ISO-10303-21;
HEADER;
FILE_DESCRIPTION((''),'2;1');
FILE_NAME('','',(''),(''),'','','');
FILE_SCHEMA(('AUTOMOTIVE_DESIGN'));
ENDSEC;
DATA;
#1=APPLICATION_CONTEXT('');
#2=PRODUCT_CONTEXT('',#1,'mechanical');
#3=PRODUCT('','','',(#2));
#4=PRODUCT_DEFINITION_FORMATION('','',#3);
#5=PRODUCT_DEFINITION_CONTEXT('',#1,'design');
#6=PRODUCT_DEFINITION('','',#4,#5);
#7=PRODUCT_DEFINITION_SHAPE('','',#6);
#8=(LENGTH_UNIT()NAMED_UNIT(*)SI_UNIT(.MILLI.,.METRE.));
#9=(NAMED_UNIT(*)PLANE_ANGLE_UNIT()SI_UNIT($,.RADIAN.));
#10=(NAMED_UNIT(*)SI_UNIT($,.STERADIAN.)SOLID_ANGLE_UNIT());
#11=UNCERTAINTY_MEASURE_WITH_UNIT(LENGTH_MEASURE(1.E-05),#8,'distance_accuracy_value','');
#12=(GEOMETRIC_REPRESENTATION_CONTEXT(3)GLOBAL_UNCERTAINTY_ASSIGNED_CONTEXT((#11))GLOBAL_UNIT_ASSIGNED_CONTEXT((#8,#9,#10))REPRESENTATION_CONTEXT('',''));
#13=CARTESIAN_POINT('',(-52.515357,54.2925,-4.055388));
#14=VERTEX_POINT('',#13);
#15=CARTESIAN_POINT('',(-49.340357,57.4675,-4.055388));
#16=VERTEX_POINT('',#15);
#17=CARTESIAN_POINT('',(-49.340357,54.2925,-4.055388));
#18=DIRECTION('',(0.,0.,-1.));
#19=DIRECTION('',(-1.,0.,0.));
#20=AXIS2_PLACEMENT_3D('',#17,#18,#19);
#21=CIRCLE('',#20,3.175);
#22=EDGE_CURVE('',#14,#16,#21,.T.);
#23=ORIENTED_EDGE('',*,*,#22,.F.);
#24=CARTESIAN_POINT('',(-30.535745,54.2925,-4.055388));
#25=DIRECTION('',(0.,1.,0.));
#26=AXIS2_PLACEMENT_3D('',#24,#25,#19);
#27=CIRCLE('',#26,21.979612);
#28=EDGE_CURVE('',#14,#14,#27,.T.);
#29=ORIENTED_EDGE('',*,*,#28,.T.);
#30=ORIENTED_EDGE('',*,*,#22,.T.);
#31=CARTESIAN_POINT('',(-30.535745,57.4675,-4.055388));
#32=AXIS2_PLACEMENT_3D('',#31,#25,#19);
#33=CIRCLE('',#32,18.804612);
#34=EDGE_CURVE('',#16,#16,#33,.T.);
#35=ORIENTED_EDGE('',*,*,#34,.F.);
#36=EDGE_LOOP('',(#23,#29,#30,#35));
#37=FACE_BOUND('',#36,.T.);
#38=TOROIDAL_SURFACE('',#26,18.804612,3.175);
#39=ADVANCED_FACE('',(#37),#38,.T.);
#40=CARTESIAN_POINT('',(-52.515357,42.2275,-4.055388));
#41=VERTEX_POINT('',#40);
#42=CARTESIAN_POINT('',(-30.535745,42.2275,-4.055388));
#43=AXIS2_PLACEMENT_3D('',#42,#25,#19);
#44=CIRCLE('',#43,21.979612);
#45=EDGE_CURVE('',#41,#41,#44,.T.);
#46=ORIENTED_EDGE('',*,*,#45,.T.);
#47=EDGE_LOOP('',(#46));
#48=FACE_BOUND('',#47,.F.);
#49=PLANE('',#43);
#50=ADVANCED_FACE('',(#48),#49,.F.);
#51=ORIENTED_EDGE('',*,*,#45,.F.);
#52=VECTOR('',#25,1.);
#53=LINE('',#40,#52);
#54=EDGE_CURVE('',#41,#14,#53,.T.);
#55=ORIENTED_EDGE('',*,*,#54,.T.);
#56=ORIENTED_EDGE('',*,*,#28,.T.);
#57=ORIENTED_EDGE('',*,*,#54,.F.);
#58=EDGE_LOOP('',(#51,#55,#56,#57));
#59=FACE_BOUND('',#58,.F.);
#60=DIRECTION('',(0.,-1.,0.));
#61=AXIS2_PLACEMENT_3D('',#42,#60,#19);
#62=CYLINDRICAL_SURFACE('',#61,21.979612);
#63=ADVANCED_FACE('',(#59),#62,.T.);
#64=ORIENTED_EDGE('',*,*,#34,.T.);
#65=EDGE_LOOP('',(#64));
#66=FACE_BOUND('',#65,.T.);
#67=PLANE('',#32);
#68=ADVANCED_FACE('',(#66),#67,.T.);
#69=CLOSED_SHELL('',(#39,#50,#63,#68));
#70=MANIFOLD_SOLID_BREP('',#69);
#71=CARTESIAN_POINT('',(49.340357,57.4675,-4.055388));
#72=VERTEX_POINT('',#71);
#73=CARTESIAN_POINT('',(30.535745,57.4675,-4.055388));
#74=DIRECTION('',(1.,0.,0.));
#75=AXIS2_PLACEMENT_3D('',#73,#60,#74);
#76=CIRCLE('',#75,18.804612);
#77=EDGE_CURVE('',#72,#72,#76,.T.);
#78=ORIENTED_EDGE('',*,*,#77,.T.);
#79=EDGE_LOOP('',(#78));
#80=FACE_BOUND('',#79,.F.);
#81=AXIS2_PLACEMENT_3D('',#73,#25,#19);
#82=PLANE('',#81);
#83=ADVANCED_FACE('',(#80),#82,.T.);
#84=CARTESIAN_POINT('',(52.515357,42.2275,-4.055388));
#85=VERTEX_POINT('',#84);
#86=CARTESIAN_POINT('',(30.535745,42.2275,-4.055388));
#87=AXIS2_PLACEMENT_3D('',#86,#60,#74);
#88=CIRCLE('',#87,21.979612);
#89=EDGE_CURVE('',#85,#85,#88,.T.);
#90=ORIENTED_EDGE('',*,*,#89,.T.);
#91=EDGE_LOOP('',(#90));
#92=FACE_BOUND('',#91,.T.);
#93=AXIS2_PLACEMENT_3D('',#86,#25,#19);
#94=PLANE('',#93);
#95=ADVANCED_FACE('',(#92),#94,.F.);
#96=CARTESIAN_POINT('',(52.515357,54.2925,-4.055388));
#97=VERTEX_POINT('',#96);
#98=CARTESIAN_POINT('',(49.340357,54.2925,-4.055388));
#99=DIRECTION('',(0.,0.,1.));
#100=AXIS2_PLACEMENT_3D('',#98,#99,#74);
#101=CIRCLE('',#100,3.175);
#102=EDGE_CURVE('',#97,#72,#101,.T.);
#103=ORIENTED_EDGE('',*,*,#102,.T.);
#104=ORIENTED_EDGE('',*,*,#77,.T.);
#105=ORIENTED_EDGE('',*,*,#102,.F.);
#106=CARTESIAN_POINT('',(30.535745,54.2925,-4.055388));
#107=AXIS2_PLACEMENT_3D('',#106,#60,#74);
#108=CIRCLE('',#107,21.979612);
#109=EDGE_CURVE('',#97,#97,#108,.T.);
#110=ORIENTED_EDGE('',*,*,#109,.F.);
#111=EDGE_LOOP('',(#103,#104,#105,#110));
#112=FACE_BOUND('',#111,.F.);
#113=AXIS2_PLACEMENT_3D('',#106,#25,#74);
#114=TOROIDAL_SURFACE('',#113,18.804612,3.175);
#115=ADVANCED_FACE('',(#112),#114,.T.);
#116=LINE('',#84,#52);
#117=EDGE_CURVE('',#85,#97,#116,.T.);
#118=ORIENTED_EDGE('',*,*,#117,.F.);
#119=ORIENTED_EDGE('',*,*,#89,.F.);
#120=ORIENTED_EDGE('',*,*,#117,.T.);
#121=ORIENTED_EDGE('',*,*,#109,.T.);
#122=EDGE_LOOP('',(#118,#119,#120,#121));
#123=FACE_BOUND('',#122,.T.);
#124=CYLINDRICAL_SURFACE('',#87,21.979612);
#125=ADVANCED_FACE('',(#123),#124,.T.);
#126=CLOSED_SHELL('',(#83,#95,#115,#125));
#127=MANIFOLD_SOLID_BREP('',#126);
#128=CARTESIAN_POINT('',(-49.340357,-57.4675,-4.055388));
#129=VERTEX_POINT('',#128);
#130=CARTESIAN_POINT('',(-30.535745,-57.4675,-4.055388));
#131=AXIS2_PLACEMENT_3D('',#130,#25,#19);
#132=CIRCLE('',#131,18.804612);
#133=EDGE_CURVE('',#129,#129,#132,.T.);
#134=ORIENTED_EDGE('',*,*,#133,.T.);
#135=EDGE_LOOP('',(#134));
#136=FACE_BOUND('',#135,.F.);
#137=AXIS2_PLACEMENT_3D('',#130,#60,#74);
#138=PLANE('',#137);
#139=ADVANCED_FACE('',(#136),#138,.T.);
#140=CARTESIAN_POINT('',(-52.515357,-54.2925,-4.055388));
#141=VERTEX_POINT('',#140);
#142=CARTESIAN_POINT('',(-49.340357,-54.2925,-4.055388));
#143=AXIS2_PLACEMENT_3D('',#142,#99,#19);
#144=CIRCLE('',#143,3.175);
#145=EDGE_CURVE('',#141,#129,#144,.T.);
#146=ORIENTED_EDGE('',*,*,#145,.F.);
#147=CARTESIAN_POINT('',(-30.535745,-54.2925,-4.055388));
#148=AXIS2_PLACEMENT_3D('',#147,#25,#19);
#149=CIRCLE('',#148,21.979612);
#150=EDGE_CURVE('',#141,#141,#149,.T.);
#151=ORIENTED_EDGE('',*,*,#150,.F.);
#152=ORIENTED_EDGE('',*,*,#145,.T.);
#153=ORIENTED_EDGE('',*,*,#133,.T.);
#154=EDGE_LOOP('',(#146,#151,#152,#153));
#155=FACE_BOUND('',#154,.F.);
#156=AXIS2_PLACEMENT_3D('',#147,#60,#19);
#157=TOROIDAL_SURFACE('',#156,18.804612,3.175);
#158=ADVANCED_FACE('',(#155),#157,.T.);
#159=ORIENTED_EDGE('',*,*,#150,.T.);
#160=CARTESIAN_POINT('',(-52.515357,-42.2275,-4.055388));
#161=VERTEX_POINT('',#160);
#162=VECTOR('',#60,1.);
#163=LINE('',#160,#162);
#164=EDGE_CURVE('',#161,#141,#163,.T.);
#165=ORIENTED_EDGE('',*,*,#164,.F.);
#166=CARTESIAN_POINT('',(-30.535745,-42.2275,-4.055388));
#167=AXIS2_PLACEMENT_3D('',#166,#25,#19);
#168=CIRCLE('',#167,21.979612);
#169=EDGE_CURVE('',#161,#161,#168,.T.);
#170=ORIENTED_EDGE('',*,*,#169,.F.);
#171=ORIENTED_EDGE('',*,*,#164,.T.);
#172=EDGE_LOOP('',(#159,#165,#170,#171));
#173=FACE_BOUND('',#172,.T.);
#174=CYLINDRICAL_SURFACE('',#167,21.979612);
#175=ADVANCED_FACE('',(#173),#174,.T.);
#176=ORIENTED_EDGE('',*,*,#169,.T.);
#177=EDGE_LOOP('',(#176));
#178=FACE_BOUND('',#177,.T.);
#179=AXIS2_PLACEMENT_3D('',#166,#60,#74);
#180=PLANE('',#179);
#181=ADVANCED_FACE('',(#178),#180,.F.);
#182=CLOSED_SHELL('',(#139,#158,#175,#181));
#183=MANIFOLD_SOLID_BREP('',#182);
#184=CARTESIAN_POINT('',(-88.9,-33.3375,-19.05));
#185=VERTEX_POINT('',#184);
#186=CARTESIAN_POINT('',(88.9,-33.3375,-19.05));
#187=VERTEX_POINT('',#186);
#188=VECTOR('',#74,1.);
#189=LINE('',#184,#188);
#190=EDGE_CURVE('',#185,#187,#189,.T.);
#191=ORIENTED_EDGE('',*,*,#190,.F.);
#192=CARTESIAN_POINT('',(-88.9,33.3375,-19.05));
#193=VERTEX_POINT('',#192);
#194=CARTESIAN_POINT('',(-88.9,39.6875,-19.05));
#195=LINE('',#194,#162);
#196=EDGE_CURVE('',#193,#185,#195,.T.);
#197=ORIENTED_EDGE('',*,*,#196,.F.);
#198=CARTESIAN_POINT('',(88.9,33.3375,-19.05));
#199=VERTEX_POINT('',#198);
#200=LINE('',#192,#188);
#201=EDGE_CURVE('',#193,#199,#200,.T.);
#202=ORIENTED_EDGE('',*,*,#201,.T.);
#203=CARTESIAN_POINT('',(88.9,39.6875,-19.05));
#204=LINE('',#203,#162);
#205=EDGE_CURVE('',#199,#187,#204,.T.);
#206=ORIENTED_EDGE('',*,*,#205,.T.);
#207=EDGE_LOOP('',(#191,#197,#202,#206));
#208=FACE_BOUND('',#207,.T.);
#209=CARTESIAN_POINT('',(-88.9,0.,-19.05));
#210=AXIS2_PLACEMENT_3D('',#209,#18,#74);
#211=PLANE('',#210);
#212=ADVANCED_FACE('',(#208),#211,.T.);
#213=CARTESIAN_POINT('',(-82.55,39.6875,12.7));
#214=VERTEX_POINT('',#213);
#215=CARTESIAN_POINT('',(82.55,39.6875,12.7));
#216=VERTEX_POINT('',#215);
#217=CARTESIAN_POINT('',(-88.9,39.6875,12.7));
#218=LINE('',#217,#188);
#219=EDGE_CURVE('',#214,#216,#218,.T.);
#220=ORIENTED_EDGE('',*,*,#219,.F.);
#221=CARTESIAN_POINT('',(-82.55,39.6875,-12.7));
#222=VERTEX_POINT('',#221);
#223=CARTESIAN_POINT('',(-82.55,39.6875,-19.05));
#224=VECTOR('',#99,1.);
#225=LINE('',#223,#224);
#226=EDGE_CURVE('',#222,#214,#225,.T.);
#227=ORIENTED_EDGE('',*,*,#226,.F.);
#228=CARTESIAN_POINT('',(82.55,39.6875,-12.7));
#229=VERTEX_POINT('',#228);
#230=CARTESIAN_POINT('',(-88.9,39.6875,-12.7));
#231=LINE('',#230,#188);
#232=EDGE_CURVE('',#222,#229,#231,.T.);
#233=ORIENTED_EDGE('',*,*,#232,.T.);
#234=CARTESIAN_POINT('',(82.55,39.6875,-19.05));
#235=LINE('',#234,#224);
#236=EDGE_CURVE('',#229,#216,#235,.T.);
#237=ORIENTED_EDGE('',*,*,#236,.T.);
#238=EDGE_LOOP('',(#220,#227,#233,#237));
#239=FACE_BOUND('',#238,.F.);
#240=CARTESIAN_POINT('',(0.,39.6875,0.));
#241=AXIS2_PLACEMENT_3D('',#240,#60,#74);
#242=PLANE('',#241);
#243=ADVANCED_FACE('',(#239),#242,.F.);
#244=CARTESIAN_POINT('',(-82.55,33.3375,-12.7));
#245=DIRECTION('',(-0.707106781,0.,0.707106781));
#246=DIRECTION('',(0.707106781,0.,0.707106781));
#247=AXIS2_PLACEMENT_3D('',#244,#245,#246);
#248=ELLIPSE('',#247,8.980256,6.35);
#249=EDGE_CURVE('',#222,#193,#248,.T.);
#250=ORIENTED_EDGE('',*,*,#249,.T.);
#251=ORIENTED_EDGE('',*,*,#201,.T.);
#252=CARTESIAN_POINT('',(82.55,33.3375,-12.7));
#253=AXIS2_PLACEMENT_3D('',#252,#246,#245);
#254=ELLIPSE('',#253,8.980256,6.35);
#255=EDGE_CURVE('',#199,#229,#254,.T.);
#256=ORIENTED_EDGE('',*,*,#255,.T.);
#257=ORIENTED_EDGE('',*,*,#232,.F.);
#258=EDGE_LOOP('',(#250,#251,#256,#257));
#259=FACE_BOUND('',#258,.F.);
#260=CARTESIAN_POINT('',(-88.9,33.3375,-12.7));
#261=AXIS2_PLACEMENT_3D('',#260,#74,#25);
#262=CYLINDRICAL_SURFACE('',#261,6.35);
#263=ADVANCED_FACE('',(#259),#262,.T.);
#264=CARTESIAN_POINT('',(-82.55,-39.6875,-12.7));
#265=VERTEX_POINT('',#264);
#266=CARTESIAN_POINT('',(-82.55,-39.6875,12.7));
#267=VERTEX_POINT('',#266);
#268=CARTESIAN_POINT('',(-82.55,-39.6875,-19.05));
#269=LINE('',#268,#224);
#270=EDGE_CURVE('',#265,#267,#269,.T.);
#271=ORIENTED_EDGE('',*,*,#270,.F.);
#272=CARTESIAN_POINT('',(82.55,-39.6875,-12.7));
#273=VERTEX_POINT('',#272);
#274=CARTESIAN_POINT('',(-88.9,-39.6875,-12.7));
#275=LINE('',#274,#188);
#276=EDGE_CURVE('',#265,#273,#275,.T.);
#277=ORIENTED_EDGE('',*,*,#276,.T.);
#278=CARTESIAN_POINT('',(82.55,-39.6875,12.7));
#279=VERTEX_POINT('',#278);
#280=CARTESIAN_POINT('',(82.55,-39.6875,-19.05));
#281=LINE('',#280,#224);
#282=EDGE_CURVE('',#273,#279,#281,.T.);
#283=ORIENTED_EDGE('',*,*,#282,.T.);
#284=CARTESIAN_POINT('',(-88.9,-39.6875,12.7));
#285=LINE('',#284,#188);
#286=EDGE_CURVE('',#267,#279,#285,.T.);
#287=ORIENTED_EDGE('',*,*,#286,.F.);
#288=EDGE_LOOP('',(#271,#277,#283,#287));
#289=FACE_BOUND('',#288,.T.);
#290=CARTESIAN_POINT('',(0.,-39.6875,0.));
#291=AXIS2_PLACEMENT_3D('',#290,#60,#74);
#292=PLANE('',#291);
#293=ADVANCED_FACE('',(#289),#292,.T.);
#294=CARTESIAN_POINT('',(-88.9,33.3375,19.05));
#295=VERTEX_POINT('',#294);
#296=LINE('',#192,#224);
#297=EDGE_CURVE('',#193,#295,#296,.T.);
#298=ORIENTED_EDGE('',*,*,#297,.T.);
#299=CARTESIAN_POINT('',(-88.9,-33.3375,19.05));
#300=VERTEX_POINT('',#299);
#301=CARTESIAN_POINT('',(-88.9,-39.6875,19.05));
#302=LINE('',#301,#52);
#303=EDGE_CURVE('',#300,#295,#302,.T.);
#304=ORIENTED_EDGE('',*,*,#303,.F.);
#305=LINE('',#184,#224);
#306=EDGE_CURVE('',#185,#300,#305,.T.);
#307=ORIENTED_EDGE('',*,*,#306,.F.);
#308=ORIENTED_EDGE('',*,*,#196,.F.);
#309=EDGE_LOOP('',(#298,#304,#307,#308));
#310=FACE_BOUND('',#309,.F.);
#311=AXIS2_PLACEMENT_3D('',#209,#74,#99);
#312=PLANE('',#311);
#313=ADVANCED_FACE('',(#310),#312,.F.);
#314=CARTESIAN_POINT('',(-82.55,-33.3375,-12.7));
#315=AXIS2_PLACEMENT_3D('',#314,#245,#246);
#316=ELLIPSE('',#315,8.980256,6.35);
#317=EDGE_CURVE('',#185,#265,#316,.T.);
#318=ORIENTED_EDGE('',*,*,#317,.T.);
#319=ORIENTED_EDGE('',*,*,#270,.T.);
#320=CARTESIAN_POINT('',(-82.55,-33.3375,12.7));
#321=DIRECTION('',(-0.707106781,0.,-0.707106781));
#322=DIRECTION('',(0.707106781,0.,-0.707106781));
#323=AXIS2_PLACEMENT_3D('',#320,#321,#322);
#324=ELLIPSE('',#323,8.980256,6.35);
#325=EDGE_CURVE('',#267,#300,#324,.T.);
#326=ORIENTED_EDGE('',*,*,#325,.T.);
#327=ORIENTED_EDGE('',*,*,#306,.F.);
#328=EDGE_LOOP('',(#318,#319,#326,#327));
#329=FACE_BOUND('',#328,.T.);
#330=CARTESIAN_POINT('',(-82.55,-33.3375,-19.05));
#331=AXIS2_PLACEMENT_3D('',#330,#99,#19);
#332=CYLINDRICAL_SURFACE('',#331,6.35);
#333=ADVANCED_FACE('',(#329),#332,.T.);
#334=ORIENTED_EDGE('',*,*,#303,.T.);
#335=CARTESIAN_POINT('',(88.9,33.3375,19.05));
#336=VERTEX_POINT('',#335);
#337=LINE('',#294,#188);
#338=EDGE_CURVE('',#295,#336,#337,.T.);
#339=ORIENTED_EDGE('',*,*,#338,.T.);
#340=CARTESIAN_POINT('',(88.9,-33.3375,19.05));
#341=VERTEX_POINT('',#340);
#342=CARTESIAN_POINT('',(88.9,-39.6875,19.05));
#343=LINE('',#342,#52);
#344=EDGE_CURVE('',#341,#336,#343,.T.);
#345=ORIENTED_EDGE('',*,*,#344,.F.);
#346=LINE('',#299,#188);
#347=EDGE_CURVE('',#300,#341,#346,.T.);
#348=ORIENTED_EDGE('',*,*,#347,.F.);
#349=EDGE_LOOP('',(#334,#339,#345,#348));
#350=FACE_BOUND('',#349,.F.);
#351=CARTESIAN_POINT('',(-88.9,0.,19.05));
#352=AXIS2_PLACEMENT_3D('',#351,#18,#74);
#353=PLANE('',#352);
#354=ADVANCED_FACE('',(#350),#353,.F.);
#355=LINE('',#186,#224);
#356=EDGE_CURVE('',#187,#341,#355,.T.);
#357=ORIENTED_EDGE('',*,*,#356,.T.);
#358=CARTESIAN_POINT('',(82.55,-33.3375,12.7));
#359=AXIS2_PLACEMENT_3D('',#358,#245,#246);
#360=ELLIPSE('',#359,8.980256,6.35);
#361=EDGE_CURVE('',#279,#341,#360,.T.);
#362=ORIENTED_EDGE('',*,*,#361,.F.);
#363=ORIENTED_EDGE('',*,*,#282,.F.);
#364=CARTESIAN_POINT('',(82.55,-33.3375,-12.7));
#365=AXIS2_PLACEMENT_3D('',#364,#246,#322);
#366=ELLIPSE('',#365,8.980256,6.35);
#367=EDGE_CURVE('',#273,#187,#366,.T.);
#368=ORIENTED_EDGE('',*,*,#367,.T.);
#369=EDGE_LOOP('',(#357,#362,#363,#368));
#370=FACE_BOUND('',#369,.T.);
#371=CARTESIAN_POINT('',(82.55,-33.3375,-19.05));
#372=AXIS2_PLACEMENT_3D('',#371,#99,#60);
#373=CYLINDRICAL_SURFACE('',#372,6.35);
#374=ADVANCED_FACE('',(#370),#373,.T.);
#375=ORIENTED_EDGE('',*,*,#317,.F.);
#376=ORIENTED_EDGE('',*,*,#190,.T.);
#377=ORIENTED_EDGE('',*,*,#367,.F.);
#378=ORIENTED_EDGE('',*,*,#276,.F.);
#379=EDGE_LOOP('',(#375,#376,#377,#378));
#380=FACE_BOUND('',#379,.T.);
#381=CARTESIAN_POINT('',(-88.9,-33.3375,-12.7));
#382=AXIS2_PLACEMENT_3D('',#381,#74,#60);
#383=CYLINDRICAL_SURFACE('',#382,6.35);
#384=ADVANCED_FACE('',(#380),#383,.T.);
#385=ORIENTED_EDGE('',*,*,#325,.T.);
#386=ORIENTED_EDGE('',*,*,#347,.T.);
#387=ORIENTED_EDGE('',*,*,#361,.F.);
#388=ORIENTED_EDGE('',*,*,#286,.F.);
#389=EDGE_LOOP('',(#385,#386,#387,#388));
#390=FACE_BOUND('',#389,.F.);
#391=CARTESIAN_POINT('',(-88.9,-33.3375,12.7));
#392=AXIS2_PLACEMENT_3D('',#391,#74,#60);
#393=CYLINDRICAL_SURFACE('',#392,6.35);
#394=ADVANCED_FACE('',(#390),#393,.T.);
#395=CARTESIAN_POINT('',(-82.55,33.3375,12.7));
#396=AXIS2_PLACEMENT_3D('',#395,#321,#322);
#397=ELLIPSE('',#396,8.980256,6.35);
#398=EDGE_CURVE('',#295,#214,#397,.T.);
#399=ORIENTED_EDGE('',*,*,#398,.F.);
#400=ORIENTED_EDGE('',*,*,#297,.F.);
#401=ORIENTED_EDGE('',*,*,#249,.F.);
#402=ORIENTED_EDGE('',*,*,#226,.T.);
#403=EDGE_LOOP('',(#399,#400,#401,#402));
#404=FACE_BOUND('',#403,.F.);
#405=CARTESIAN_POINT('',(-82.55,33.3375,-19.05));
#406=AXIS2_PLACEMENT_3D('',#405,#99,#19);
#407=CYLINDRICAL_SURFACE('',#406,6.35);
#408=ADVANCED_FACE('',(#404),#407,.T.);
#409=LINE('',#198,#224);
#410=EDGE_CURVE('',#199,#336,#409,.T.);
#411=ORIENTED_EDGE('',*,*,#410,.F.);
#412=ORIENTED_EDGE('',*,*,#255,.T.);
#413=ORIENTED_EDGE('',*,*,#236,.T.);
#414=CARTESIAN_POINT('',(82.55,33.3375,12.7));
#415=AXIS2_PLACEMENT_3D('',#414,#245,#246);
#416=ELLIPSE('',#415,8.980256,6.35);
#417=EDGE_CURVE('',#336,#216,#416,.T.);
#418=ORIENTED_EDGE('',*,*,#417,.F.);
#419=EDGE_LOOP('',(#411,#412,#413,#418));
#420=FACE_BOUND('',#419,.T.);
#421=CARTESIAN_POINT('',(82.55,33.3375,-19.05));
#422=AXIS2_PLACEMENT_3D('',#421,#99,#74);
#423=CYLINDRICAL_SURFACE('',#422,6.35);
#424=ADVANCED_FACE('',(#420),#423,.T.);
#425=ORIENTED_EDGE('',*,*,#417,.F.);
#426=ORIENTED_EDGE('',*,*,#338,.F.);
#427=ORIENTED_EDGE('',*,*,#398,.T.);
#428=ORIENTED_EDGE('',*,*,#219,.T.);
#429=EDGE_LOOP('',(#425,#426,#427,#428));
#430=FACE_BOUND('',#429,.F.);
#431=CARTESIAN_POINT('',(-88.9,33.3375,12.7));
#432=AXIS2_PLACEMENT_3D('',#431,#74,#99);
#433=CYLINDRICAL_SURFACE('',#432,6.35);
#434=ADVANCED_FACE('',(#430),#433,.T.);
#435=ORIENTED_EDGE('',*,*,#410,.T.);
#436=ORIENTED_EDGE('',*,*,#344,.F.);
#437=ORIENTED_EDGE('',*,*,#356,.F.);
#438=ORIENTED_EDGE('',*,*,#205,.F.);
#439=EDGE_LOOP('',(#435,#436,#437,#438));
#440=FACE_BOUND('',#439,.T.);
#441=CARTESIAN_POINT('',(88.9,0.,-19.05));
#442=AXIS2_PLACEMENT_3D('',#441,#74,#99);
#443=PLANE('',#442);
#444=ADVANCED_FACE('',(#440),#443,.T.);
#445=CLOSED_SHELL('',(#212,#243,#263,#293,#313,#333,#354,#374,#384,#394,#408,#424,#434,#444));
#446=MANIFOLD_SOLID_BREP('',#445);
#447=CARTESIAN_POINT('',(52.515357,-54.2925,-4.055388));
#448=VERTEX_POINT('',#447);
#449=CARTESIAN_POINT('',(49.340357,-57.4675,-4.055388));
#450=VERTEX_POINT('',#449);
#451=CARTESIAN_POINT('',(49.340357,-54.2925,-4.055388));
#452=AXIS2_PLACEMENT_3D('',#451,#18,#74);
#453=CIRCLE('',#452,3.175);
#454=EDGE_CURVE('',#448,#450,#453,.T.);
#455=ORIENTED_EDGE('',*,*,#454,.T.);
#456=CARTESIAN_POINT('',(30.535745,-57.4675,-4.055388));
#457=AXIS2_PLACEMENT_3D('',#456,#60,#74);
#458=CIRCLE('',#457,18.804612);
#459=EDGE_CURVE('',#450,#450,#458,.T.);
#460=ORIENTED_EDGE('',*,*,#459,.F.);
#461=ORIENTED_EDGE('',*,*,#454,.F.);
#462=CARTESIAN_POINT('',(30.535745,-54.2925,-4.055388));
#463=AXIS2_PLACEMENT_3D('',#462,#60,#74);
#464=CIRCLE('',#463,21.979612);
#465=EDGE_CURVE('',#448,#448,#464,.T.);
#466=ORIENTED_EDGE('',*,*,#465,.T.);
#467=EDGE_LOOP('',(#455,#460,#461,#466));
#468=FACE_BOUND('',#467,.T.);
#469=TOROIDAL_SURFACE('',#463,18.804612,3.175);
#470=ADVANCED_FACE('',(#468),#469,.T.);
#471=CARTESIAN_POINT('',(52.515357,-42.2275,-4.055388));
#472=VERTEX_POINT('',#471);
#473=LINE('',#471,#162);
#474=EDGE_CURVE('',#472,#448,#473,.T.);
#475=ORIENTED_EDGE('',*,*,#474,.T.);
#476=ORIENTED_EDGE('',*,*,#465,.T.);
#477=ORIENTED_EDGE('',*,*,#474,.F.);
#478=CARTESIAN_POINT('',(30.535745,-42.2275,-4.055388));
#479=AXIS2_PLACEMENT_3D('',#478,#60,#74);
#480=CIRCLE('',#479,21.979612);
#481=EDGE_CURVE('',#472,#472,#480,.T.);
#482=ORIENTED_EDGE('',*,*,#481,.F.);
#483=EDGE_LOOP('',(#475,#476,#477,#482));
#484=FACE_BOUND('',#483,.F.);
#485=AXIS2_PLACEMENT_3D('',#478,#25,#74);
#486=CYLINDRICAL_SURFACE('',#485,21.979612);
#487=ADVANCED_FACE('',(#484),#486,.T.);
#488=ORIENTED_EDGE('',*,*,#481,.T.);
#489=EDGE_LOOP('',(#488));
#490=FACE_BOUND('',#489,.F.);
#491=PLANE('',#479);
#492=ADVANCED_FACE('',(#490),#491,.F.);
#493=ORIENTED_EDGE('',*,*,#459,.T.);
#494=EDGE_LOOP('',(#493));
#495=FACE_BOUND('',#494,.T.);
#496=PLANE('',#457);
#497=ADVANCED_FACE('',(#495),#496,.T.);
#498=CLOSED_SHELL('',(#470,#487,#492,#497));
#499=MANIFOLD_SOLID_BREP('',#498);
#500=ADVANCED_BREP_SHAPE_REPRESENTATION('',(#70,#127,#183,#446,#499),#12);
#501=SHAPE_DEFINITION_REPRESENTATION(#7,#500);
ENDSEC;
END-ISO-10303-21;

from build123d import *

# Parameters (mm, degrees)
F1_W     = 177.8
F1_H     = 38.1
F3_DEPTH = 39.6875
F5_R     = 21.9796121182
F6_DEPTH = 15.24
F7_R     = 3.175
F8_R     = 6.35


# Not quite as in the source:
# - the program builds the solid bodies; features that only make, move or delete a surface that nothing else refers to are left out


with BuildPart() as f3:
    # F1 (on face) → F3 (new body, symmetric)
    with BuildSketch(Plane.XZ):
        Rectangle(F1_W, F1_H)
    extrude(amount=F3_DEPTH, both=True)

    # F8
    f8_edges = [f3.edges().sort_by_distance(p)[0] for p in [
        (0, -39.6875, 19.05),
        (-88.9, -39.6875, 0),
        (0, -39.6875, -19.05),
        (88.9, -39.6875, 0),
        (88.9, 39.6875, 0),
        (0, 39.6875, 19.05),
        (0, 39.6875, -19.05),
        (-88.9, 39.6875, 0),
    ]]
    fillet(f8_edges, radius=F8_R)


with BuildPart() as f6:
    # F5 (on offset) → F6 (new body)
    with BuildSketch(Plane.XZ.offset(42.2275)):
        with Locations((30.5357445031, -4.0553878818)):
            Circle(F5_R)
    extrude(amount=F6_DEPTH)

    # F7
    f7_edges = [f6.edges().sort_by_distance(p)[0] for p in [
        (8.556132, -57.4675, -4.055388),
    ]]
    fillet(f7_edges, radius=F7_R)


with BuildPart() as f9_1:
    # F9: instance of F6
    add(f6.part.mirror(Plane.XZ))


with BuildPart() as f10_1:
    # F10: instance of F6
    add(f6.part.mirror(Plane.YZ))


with BuildPart() as f10_2:
    # F10: instance of F9_1
    add(f9_1.part.mirror(Plane.YZ))


solid = Compound([f3.part, f6.part, f9_1.part, f10_1.part, f10_2.part])
